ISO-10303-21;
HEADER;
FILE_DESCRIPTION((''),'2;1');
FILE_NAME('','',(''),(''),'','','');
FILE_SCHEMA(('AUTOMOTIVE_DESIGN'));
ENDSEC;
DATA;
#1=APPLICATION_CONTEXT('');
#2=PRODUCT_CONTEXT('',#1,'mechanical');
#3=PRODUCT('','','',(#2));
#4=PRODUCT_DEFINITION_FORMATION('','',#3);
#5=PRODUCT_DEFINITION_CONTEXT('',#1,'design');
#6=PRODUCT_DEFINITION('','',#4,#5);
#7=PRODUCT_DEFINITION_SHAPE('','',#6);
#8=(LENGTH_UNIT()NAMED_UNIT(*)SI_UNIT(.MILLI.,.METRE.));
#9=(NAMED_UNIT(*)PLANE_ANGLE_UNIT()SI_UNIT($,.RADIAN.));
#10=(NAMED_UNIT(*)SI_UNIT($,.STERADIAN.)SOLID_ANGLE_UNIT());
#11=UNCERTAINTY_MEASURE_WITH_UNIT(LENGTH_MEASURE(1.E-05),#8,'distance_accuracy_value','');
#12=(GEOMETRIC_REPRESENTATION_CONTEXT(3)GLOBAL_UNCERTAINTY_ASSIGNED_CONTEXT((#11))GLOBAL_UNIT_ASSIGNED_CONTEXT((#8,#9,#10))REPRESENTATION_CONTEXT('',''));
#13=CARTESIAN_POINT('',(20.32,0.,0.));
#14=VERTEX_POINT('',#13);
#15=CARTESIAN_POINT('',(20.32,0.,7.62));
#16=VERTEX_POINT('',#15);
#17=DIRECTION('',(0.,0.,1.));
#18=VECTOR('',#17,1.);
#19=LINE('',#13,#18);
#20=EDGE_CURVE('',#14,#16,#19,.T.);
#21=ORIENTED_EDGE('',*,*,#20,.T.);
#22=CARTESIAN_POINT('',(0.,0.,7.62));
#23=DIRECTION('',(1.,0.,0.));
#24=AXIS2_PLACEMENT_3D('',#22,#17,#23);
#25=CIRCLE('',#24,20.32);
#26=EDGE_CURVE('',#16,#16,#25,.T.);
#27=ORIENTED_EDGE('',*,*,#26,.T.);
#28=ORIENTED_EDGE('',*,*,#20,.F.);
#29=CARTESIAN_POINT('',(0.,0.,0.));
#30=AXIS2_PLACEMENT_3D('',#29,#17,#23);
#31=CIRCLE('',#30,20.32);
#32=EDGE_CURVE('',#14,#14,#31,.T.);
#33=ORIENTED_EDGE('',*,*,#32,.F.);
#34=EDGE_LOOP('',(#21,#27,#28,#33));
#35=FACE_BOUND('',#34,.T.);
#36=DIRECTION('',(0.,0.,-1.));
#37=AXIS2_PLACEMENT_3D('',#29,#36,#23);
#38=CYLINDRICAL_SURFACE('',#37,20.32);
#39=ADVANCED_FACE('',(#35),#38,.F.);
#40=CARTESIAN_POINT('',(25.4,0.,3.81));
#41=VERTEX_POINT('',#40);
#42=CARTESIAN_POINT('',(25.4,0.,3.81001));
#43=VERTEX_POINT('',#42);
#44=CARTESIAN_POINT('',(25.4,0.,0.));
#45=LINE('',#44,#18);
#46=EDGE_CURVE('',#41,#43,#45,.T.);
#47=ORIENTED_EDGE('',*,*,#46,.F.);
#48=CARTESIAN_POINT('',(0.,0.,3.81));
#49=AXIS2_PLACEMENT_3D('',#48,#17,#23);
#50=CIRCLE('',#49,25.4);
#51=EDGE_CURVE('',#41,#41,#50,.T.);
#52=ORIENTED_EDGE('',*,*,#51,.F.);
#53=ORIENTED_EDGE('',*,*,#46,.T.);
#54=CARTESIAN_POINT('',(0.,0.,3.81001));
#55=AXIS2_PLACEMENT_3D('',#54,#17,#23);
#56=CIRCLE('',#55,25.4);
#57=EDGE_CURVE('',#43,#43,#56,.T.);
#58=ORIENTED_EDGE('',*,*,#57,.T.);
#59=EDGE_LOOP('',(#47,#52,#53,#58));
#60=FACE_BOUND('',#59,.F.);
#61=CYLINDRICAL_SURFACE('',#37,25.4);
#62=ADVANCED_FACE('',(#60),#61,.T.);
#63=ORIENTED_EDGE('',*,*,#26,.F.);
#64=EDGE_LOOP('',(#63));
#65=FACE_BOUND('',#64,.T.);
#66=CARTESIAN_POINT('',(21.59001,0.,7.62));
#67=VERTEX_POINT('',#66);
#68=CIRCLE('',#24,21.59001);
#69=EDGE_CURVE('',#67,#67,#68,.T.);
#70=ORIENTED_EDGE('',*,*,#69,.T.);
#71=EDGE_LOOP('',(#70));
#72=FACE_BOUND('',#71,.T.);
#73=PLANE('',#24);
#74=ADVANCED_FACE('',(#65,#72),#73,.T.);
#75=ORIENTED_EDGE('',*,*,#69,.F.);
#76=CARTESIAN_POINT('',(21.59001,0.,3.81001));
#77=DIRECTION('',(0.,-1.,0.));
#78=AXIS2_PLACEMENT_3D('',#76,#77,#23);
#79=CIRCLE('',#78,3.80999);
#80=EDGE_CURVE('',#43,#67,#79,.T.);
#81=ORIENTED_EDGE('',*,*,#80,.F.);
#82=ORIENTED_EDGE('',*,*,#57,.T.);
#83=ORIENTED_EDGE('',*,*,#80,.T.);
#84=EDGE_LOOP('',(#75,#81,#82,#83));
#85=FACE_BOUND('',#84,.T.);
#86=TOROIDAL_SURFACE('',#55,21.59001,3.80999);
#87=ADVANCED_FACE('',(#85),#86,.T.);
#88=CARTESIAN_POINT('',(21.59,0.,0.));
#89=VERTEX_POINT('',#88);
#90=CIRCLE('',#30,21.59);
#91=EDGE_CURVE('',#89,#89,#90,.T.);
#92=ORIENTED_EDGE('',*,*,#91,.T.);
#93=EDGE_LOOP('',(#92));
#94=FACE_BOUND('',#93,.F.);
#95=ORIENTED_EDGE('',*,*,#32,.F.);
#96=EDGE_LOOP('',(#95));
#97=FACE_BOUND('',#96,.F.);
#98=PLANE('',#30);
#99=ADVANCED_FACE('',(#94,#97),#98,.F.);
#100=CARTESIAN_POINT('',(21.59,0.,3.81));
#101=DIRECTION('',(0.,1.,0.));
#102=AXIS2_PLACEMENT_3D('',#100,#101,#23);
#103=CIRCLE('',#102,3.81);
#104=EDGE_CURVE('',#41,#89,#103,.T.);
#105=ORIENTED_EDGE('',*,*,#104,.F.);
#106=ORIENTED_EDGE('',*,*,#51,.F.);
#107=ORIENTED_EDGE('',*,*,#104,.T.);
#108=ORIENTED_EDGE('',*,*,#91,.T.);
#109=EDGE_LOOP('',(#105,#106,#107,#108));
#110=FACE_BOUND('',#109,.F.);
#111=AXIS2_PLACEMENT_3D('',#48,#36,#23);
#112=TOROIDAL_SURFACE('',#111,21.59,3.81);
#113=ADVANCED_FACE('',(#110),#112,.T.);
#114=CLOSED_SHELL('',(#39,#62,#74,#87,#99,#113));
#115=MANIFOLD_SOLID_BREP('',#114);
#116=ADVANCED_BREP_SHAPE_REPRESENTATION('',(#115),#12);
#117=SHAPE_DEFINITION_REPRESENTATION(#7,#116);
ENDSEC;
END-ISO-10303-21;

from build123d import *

# Parameters (mm, degrees)
F1_R     = 25.4
F1_R_2   = 20.32
F2_DEPTH = 7.62
F3_R     = 3.81
F0_R     = 3.80999


# Not quite as in the source:
# - a fillet or chamfer is up to 0.001 mm smaller than in the source, because OpenCascade refuses the exact size


with BuildPart() as f2:
    # F1 (on Top) → F2 (new body)
    with BuildSketch(Plane.XY):
        Circle(F1_R)
        Circle(F1_R_2, mode=Mode.SUBTRACT)
    extrude(amount=F2_DEPTH)

    # F3
    f3_edges = [f2.edges().sort_by_distance(p)[0] for p in [
        (-25.4, 0, 0),
    ]]
    fillet(f3_edges, radius=F3_R)

    # F0 (radius 3.81 in the source; OpenCascade refuses exactly that, so slightly less here)
    f0_edges = [f2.edges().sort_by_distance(p)[0] for p in [
        (-25.4, 0, 7.62),
    ]]
    fillet(f0_edges, radius=F0_R)


solid = f2.part
